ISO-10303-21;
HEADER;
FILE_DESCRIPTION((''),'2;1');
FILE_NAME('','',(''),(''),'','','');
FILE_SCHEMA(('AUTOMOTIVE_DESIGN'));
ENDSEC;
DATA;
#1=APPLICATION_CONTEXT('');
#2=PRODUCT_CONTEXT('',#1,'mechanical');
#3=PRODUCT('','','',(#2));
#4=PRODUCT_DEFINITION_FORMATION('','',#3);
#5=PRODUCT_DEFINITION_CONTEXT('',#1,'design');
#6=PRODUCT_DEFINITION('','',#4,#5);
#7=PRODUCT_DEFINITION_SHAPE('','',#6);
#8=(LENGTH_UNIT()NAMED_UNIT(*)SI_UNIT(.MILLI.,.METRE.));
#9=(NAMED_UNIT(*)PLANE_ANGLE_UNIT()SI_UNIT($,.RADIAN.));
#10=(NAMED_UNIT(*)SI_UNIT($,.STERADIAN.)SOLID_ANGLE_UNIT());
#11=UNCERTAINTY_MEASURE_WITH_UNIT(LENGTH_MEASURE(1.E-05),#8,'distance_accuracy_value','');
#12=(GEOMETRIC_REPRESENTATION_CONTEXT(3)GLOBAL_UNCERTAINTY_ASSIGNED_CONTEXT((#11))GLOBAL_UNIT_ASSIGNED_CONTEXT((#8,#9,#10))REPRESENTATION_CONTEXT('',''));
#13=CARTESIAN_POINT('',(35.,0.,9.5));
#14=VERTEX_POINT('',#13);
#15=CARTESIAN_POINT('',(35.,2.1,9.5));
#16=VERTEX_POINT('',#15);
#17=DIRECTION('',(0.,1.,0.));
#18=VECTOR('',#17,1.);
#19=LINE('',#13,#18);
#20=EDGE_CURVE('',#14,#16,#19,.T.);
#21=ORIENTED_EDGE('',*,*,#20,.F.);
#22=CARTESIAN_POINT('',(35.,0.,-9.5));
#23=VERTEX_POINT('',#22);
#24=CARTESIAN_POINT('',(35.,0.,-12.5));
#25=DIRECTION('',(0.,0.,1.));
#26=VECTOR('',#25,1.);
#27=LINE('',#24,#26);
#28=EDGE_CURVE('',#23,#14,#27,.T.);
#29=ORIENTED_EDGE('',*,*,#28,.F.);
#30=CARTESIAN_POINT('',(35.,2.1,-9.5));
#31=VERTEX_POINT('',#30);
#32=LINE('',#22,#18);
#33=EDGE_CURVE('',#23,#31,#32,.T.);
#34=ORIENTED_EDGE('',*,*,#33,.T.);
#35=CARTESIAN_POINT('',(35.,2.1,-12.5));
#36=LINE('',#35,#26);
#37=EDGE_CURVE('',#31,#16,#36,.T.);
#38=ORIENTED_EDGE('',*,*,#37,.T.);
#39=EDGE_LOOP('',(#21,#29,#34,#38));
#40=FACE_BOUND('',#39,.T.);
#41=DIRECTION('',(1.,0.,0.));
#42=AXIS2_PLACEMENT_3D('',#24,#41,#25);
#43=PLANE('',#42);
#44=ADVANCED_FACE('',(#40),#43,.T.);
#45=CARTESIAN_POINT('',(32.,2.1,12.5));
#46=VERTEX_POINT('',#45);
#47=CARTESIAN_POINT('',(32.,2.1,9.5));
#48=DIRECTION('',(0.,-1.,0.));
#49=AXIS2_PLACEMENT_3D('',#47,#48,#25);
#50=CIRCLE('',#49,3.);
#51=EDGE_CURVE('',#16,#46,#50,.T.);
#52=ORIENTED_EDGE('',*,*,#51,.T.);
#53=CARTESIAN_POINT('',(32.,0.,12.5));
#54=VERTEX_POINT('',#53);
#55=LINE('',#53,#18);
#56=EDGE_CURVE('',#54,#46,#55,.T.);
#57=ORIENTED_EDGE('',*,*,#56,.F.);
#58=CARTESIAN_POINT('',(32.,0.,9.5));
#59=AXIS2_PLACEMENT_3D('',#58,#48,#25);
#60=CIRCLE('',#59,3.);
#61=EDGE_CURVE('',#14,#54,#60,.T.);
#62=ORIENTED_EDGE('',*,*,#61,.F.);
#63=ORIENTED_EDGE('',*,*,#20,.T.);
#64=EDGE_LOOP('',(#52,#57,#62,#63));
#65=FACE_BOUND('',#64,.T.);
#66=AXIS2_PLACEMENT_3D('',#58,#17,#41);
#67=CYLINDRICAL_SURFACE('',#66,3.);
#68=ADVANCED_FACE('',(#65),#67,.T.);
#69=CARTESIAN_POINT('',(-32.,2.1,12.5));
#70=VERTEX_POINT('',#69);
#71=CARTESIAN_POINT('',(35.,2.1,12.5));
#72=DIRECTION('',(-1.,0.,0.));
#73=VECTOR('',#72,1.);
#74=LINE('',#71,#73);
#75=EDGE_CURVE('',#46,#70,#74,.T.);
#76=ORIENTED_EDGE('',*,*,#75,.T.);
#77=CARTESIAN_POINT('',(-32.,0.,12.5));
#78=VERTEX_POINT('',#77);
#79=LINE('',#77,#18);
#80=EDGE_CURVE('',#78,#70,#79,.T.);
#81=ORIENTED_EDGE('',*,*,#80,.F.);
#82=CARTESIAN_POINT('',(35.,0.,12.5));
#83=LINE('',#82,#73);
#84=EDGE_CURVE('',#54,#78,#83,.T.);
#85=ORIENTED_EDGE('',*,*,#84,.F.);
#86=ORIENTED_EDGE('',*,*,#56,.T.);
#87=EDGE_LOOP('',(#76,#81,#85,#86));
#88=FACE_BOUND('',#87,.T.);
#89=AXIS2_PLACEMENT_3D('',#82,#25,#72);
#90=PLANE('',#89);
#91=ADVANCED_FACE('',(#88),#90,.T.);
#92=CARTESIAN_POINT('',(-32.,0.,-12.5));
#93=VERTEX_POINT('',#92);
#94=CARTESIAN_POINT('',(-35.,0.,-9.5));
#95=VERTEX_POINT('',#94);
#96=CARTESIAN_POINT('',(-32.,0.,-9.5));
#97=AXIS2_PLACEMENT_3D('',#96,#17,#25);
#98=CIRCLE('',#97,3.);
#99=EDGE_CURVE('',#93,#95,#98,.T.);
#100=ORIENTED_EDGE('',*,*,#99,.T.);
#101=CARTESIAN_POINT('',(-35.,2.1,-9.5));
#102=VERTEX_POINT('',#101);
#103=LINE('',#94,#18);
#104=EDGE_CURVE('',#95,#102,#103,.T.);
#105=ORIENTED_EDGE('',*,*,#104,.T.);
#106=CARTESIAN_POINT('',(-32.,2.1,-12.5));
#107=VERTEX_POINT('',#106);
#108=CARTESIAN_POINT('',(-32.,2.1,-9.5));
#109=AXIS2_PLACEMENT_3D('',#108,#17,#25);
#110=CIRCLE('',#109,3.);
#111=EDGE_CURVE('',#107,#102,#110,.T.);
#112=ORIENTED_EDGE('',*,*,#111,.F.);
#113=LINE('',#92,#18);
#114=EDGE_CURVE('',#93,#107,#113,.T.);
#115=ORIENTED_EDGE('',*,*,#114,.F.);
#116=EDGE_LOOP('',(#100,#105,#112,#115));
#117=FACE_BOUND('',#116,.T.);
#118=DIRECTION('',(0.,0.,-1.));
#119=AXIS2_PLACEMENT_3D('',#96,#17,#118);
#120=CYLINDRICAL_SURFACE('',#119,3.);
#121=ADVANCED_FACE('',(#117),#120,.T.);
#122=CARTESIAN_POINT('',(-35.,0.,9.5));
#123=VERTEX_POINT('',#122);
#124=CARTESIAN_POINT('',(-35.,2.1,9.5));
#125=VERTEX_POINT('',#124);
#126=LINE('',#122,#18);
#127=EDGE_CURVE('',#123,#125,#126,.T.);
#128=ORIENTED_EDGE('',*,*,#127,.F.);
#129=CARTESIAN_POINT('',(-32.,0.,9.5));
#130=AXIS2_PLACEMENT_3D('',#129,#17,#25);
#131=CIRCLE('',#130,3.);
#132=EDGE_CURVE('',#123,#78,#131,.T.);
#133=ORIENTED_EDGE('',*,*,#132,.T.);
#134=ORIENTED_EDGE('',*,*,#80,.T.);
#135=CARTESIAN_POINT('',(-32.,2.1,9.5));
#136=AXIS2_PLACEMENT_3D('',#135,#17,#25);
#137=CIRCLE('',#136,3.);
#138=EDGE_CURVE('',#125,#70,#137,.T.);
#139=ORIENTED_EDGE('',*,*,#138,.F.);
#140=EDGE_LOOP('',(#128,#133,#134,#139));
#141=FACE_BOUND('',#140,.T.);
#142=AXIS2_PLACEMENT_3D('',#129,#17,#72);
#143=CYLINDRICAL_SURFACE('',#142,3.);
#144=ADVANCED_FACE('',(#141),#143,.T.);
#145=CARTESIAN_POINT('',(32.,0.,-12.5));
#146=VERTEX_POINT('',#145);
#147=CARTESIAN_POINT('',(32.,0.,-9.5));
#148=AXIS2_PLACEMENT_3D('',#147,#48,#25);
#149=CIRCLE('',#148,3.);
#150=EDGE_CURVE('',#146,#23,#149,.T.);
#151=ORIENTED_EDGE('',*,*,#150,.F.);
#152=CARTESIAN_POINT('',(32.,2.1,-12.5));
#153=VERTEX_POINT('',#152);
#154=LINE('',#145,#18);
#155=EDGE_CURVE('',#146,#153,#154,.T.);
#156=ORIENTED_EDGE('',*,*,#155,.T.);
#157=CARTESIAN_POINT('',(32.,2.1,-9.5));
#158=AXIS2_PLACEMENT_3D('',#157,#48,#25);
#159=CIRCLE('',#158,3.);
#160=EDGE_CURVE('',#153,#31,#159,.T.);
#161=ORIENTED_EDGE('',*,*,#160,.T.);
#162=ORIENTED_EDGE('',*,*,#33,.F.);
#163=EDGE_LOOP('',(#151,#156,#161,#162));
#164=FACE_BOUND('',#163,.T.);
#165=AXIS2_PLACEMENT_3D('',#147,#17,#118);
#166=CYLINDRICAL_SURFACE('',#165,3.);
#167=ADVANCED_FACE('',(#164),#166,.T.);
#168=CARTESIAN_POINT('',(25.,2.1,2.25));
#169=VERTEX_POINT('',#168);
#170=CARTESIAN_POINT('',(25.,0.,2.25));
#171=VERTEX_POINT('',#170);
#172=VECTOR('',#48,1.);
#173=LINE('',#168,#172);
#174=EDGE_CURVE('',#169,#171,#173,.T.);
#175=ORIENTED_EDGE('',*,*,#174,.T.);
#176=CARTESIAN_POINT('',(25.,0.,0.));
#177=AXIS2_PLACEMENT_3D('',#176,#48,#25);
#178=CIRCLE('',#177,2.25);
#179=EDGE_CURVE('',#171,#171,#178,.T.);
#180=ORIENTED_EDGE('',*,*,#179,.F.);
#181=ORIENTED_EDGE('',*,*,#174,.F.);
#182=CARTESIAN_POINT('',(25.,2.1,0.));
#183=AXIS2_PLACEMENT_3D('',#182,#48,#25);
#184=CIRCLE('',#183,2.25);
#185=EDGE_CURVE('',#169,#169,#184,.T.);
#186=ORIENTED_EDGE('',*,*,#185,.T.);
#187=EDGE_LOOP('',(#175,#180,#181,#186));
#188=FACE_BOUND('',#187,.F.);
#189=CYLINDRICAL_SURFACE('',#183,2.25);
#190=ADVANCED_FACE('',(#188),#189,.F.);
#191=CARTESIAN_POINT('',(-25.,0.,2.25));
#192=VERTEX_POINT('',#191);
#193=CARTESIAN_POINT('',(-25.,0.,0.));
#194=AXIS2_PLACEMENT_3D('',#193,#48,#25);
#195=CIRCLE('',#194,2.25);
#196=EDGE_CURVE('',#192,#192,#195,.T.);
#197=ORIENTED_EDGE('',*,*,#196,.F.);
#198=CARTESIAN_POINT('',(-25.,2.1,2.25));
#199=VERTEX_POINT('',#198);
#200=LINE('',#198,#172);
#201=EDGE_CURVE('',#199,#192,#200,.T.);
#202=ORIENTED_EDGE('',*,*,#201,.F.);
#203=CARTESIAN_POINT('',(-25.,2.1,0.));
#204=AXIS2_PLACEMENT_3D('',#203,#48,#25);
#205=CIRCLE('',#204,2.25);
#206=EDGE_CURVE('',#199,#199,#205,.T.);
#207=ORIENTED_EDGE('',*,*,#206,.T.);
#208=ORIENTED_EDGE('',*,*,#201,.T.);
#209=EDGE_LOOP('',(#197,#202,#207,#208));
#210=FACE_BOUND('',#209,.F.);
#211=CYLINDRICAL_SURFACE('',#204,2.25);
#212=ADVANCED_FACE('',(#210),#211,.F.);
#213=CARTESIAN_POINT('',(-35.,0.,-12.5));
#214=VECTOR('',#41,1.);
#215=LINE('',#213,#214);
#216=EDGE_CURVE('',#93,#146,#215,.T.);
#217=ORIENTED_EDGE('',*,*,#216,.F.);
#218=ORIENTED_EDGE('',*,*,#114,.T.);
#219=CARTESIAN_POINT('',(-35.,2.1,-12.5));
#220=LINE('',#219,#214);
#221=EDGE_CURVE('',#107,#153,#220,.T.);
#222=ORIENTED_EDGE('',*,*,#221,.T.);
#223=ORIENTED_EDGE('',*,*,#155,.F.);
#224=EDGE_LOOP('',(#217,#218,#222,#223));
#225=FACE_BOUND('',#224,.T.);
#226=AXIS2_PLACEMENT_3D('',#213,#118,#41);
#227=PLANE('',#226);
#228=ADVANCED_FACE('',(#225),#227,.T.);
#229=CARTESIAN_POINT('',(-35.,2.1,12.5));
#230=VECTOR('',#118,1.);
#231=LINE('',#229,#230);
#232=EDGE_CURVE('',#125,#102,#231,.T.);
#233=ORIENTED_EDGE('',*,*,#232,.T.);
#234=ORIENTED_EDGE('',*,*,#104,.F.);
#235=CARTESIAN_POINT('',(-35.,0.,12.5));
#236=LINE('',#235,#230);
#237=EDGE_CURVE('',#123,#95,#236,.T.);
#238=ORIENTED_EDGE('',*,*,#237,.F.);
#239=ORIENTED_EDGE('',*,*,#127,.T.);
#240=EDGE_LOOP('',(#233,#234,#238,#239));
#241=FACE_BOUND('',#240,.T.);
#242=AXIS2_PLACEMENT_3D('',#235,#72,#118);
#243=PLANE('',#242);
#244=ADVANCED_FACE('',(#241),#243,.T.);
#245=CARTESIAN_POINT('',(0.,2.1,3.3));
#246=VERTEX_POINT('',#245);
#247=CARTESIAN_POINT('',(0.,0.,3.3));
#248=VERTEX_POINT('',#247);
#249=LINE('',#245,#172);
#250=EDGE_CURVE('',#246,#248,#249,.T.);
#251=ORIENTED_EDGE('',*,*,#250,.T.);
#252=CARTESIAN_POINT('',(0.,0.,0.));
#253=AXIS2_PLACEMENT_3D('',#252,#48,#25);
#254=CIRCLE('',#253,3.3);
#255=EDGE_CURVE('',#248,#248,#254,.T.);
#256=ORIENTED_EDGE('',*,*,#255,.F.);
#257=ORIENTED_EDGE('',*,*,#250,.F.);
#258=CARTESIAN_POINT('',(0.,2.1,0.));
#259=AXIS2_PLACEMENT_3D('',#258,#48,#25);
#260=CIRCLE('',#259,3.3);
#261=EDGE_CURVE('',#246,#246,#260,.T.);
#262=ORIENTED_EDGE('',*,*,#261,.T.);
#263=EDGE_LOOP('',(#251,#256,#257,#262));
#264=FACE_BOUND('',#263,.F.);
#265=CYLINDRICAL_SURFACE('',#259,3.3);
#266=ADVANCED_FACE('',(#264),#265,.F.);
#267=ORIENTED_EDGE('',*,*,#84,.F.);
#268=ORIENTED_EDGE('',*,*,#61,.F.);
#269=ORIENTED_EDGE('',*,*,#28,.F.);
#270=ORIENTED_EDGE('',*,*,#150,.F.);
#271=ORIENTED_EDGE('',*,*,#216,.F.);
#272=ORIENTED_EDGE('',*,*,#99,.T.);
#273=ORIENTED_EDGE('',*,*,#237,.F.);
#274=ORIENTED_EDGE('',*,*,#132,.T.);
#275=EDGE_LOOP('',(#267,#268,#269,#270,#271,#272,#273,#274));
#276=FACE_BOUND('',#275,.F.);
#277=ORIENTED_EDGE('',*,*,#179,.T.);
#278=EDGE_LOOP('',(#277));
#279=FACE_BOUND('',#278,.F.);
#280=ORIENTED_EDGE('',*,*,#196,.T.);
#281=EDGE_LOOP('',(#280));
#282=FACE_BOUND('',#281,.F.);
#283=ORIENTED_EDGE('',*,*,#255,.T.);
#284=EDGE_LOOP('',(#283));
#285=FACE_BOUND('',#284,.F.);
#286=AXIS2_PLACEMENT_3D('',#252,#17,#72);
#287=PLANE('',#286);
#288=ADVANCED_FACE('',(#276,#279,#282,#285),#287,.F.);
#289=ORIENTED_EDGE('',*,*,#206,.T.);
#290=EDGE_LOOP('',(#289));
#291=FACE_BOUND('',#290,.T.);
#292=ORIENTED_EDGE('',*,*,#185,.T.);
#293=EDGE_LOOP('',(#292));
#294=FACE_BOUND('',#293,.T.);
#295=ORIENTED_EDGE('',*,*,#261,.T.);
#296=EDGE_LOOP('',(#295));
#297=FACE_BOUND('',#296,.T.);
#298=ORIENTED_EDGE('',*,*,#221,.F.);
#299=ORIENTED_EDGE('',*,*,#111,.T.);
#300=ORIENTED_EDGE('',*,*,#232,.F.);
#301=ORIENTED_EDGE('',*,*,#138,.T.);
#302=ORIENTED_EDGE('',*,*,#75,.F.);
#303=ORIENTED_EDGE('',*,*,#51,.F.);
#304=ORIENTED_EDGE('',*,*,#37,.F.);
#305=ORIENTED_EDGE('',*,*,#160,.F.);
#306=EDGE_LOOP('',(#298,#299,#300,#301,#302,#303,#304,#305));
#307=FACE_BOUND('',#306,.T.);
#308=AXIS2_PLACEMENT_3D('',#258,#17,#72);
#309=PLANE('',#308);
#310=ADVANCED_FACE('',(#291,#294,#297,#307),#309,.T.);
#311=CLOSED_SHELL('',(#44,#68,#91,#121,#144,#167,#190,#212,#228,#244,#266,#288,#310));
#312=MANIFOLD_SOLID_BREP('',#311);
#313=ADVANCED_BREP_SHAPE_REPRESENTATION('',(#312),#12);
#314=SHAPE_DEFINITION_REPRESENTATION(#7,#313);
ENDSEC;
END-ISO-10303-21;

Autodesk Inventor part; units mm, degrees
ref_plane "YZ Plane" through (0, 0, 0) normal (1, 0, 0) x (0, 1, 0)
ref_plane "XZ Plane" through (0, 0, 0) normal (0, 1, 0) x (-1, 0, 0)
ref_plane "XY Plane" through (0, 0, 0) normal (0, 0, 1) x (1, 0, 0)
sketch "Sketch1" plane through (0, 0, 0) normal (0, 1, 0) x (-1, 0, 0)
  line L0 (35, -12.5) -> (-35, -12.5)
  line L1 (-35, -12.5) -> (-35, 12.5)
  line L2 (-35, 12.5) -> (35, 12.5)
  line L3 (35, 12.5) -> (35, -12.5)
  line L4 (35, -12.5) -> (-35, 12.5) construction
  line L5 (-35, -12.5) -> (35, 12.5) construction
  point P0 (0, 0)
  point P1 (0, 0)
  dimension "d19" = 25
  dimension "d21" = 70
extrude "Plate1" add sketch "Sketch1" along normal blind 2.1
sketch "Sketch2" plane through (0, 2.1, 0) normal (0, 1, 0) x (1, 0, 0)
  line L0 (0, 0) -> (-25, 0)
  line L1 (0, 0) -> (0, 5)
  point P0 (25, 0)
  point P1 (25, 0)
  dimension "d3" = 25
  dimension "d4" = 5
hole "Hole1" at (0, 2.1, 0) direction (0, -1, 0) diameter 6.6 depth 2.1 clearance for "Countersunk Flat Head Screw ISO 2009/7046" size "M6" standard "ISO"
hole "Hole2" at (-25, 2.1, 0) at (25, 2.1, 0) direction (0, -1, 0) diameter 4.5 depth 2.1 clearance for "Countersunk Flat Head Screw ISO 2009/7046" size "M4" standard "ISO"
fillet "Corner Round1" radius 3 4 edges at (-35, 1.05, 12.5) (35, 1.05, 12.5) (35, 1.05, -12.5) (-35, 1.05, -12.5)
equation "\"d10\" = Thickness"
equation "\"d17\" = Thickness"
equation "\"d2\" = Thickness"
equation "\"BendReliefWidth\" = Thickness"
equation "\"BendReliefDepth\" = 0.5 * Thickness"
equation "\"CornerReliefSize\" = 4 * Thickness"
equation "\"MinimumRemnant\" = 2 * Thickness"
equation "\"TransitionRadius\" = BendRadius"
equation "\"JacobiRadiusSize\" = BendRadius"
equation "\"GapSize\" = Thickness"
equation "\"Thickness\" = 2.1"
equation "\"BendRadius\" = 1.512"
properties part number "SP58V1 Seguro Pedales" material "Steel, Carbon"
